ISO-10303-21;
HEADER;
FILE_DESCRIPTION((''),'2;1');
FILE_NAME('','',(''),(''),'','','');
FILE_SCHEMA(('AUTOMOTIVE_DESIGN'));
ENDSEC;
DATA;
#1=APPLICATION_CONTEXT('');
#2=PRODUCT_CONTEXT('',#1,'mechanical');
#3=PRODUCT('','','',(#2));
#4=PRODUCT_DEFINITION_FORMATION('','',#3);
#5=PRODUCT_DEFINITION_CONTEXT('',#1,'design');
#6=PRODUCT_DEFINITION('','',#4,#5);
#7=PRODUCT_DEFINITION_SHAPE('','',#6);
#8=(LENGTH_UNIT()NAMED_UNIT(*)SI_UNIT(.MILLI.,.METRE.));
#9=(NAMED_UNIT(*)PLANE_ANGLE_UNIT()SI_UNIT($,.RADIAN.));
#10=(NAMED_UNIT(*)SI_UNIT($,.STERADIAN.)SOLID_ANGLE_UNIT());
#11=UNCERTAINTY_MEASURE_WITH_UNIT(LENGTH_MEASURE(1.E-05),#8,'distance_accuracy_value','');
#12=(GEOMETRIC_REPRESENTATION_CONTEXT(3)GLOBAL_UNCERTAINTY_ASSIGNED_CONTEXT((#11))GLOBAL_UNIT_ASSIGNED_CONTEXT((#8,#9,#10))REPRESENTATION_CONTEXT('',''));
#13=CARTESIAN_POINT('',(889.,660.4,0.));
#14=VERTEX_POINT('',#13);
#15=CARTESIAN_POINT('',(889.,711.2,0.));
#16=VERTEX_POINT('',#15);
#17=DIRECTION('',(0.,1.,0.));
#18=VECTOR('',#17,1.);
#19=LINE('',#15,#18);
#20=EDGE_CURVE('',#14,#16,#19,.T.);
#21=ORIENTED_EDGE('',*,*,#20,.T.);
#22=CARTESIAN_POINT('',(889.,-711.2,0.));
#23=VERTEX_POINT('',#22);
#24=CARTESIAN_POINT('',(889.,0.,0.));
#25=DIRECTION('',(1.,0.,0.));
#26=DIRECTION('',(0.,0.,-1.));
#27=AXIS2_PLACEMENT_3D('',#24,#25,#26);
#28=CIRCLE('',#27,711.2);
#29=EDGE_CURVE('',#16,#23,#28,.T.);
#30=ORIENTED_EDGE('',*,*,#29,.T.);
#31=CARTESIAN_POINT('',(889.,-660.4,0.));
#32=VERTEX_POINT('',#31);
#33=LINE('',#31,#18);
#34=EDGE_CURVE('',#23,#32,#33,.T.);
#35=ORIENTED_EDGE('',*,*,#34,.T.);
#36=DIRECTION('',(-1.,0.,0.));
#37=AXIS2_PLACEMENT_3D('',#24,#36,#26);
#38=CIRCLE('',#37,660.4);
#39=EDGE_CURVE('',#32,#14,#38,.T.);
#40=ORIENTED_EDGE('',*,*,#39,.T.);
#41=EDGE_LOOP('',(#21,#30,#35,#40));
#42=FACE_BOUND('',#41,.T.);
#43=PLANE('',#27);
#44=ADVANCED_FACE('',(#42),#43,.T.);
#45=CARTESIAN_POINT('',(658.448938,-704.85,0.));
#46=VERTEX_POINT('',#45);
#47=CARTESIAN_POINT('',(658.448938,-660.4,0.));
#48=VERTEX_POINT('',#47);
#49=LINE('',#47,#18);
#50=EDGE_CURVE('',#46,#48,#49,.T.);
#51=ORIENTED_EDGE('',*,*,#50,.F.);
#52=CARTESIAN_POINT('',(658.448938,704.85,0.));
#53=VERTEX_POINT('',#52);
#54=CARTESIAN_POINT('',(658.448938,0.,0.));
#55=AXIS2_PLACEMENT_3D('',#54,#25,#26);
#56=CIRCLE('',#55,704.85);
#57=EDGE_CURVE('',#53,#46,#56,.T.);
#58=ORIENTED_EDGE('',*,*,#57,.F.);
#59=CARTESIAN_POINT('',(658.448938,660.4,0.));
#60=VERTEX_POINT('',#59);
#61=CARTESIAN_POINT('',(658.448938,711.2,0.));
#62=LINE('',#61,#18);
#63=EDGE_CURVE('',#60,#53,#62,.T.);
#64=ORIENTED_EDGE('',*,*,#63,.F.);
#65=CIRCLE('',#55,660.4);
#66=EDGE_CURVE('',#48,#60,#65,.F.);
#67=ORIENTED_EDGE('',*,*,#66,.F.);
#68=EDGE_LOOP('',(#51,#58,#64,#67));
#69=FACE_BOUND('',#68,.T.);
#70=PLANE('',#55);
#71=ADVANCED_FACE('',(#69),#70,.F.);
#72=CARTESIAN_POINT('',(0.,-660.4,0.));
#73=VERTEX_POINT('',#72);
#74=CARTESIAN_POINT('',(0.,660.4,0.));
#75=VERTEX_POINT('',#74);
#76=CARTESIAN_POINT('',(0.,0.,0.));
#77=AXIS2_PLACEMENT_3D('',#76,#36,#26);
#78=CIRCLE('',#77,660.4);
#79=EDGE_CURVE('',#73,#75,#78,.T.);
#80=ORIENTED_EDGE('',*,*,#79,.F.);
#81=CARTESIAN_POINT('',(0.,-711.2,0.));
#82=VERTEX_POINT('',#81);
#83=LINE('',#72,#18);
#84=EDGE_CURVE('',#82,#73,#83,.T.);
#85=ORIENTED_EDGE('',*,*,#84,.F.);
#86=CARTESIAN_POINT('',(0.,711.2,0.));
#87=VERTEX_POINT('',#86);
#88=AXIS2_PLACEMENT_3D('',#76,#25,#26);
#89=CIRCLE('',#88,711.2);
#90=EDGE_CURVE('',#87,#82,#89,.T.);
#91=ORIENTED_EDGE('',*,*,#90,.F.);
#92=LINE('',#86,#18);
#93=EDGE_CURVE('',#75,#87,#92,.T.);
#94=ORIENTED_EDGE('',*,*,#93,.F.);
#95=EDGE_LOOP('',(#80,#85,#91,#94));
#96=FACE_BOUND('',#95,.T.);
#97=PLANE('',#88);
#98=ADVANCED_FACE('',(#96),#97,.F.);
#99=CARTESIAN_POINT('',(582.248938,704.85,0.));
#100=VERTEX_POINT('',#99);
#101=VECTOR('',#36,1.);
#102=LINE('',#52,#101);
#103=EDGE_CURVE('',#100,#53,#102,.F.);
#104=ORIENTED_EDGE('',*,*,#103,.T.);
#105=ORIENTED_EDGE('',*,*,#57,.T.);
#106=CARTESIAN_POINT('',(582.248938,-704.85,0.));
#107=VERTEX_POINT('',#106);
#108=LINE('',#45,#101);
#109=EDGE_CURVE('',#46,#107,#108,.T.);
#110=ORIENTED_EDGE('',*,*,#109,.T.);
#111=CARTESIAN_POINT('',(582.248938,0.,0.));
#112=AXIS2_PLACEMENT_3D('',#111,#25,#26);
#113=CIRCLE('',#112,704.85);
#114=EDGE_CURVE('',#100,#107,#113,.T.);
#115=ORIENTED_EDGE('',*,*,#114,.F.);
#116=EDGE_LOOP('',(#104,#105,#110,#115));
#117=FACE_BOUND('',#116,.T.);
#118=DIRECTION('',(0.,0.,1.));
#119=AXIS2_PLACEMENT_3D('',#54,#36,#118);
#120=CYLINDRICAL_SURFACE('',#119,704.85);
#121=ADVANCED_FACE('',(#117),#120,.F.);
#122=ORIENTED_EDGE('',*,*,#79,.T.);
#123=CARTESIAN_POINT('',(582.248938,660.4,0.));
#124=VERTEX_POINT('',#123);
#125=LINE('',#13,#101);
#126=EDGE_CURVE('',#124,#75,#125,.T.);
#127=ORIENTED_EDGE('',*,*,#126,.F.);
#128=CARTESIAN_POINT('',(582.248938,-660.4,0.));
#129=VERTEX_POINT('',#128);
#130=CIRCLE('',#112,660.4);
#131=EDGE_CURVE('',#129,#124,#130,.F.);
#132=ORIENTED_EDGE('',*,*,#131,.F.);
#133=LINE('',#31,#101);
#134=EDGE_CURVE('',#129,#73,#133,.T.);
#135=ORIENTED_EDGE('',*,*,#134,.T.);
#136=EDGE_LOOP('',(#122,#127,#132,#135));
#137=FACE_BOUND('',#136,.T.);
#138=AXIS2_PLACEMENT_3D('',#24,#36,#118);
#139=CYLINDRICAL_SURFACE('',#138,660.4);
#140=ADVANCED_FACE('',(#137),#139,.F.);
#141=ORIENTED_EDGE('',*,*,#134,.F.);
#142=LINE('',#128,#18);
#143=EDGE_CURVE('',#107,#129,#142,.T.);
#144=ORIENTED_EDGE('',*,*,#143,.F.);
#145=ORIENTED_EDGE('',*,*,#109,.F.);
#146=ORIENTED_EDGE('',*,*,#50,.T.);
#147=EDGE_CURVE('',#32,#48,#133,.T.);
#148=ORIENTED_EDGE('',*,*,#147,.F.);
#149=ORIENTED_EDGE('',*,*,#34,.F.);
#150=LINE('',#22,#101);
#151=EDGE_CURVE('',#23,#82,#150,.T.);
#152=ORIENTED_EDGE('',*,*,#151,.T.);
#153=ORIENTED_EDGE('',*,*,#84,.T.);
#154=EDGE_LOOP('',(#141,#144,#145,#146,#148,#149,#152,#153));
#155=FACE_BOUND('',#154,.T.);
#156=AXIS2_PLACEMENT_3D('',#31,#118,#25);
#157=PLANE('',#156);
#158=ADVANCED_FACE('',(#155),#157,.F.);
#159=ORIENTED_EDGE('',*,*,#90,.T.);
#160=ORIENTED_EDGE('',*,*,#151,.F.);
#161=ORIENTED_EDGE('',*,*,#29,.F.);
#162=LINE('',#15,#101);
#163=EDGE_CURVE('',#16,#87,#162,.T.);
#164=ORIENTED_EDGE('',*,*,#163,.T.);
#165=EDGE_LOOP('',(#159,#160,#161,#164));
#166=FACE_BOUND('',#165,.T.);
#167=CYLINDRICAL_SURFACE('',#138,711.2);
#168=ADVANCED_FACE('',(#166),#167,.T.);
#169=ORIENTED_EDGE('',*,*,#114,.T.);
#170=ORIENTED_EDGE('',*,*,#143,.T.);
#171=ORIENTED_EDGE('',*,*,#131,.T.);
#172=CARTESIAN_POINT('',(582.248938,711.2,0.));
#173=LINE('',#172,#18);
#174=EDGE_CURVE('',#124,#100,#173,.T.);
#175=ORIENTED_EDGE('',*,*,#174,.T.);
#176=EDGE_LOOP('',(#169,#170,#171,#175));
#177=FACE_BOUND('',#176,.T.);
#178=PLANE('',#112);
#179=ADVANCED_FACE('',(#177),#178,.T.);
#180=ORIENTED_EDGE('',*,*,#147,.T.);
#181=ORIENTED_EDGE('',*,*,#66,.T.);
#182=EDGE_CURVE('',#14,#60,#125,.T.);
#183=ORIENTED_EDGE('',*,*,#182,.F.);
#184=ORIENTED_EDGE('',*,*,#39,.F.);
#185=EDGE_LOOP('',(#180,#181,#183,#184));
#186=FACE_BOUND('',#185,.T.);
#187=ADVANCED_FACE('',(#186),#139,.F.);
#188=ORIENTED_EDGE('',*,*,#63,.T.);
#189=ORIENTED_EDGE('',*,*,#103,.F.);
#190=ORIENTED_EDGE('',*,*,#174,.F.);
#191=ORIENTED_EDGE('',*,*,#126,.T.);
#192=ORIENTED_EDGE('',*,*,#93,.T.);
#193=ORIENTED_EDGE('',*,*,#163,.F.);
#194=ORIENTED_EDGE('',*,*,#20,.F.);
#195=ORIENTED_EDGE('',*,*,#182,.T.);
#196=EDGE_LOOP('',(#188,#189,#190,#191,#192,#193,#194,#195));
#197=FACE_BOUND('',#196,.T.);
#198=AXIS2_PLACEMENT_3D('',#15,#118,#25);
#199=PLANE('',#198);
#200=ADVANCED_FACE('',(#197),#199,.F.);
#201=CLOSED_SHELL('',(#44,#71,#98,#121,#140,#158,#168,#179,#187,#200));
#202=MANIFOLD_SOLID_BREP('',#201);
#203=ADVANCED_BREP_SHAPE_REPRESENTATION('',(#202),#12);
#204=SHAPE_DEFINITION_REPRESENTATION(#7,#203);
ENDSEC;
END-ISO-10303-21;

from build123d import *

# Parameters (mm, degrees)
BOSS_EXTRUDE1_DEPTH = 889
CAVITY1_START       = 582.248938238
CAVITY1_DEPTH       = 76.2


# Read off the part's stored shape, not the designer's step: Cavity1
with BuildPart() as part:
    # Sketch1 → Boss-Extrude1 (new body)
    with BuildSketch(Plane(origin=(0, 0, 0), x_dir=(0, 0, -1), z_dir=(1, 0, 0))):
        with BuildLine():
            Line((0, 711.2), (0, 660.4))
            ThreePointArc((0, 660.4), (-660.4, 0), (0, -660.4))
            Line((0, -660.4), (0, -711.2))
            ThreePointArc((0, -711.2), (-711.2, 0), (0, 711.2))
        make_face()
    extrude(amount=BOSS_EXTRUDE1_DEPTH)

    # Cavity1 outline → Cavity1 (cut)
    with BuildSketch(Plane.YZ.offset(CAVITY1_START)):
        with BuildLine():
            ThreePointArc((704.85, 0), (0, 704.85), (-704.85, 0))
            Line((-704.85, 0), (-660.4, 0))
            ThreePointArc((-660.4, 0), (0, 660.4), (660.4, 0))
            Line((660.4, 0), (704.85, 0))
        make_face()
    extrude(amount=CAVITY1_DEPTH, mode=Mode.SUBTRACT)


solid = part.part
